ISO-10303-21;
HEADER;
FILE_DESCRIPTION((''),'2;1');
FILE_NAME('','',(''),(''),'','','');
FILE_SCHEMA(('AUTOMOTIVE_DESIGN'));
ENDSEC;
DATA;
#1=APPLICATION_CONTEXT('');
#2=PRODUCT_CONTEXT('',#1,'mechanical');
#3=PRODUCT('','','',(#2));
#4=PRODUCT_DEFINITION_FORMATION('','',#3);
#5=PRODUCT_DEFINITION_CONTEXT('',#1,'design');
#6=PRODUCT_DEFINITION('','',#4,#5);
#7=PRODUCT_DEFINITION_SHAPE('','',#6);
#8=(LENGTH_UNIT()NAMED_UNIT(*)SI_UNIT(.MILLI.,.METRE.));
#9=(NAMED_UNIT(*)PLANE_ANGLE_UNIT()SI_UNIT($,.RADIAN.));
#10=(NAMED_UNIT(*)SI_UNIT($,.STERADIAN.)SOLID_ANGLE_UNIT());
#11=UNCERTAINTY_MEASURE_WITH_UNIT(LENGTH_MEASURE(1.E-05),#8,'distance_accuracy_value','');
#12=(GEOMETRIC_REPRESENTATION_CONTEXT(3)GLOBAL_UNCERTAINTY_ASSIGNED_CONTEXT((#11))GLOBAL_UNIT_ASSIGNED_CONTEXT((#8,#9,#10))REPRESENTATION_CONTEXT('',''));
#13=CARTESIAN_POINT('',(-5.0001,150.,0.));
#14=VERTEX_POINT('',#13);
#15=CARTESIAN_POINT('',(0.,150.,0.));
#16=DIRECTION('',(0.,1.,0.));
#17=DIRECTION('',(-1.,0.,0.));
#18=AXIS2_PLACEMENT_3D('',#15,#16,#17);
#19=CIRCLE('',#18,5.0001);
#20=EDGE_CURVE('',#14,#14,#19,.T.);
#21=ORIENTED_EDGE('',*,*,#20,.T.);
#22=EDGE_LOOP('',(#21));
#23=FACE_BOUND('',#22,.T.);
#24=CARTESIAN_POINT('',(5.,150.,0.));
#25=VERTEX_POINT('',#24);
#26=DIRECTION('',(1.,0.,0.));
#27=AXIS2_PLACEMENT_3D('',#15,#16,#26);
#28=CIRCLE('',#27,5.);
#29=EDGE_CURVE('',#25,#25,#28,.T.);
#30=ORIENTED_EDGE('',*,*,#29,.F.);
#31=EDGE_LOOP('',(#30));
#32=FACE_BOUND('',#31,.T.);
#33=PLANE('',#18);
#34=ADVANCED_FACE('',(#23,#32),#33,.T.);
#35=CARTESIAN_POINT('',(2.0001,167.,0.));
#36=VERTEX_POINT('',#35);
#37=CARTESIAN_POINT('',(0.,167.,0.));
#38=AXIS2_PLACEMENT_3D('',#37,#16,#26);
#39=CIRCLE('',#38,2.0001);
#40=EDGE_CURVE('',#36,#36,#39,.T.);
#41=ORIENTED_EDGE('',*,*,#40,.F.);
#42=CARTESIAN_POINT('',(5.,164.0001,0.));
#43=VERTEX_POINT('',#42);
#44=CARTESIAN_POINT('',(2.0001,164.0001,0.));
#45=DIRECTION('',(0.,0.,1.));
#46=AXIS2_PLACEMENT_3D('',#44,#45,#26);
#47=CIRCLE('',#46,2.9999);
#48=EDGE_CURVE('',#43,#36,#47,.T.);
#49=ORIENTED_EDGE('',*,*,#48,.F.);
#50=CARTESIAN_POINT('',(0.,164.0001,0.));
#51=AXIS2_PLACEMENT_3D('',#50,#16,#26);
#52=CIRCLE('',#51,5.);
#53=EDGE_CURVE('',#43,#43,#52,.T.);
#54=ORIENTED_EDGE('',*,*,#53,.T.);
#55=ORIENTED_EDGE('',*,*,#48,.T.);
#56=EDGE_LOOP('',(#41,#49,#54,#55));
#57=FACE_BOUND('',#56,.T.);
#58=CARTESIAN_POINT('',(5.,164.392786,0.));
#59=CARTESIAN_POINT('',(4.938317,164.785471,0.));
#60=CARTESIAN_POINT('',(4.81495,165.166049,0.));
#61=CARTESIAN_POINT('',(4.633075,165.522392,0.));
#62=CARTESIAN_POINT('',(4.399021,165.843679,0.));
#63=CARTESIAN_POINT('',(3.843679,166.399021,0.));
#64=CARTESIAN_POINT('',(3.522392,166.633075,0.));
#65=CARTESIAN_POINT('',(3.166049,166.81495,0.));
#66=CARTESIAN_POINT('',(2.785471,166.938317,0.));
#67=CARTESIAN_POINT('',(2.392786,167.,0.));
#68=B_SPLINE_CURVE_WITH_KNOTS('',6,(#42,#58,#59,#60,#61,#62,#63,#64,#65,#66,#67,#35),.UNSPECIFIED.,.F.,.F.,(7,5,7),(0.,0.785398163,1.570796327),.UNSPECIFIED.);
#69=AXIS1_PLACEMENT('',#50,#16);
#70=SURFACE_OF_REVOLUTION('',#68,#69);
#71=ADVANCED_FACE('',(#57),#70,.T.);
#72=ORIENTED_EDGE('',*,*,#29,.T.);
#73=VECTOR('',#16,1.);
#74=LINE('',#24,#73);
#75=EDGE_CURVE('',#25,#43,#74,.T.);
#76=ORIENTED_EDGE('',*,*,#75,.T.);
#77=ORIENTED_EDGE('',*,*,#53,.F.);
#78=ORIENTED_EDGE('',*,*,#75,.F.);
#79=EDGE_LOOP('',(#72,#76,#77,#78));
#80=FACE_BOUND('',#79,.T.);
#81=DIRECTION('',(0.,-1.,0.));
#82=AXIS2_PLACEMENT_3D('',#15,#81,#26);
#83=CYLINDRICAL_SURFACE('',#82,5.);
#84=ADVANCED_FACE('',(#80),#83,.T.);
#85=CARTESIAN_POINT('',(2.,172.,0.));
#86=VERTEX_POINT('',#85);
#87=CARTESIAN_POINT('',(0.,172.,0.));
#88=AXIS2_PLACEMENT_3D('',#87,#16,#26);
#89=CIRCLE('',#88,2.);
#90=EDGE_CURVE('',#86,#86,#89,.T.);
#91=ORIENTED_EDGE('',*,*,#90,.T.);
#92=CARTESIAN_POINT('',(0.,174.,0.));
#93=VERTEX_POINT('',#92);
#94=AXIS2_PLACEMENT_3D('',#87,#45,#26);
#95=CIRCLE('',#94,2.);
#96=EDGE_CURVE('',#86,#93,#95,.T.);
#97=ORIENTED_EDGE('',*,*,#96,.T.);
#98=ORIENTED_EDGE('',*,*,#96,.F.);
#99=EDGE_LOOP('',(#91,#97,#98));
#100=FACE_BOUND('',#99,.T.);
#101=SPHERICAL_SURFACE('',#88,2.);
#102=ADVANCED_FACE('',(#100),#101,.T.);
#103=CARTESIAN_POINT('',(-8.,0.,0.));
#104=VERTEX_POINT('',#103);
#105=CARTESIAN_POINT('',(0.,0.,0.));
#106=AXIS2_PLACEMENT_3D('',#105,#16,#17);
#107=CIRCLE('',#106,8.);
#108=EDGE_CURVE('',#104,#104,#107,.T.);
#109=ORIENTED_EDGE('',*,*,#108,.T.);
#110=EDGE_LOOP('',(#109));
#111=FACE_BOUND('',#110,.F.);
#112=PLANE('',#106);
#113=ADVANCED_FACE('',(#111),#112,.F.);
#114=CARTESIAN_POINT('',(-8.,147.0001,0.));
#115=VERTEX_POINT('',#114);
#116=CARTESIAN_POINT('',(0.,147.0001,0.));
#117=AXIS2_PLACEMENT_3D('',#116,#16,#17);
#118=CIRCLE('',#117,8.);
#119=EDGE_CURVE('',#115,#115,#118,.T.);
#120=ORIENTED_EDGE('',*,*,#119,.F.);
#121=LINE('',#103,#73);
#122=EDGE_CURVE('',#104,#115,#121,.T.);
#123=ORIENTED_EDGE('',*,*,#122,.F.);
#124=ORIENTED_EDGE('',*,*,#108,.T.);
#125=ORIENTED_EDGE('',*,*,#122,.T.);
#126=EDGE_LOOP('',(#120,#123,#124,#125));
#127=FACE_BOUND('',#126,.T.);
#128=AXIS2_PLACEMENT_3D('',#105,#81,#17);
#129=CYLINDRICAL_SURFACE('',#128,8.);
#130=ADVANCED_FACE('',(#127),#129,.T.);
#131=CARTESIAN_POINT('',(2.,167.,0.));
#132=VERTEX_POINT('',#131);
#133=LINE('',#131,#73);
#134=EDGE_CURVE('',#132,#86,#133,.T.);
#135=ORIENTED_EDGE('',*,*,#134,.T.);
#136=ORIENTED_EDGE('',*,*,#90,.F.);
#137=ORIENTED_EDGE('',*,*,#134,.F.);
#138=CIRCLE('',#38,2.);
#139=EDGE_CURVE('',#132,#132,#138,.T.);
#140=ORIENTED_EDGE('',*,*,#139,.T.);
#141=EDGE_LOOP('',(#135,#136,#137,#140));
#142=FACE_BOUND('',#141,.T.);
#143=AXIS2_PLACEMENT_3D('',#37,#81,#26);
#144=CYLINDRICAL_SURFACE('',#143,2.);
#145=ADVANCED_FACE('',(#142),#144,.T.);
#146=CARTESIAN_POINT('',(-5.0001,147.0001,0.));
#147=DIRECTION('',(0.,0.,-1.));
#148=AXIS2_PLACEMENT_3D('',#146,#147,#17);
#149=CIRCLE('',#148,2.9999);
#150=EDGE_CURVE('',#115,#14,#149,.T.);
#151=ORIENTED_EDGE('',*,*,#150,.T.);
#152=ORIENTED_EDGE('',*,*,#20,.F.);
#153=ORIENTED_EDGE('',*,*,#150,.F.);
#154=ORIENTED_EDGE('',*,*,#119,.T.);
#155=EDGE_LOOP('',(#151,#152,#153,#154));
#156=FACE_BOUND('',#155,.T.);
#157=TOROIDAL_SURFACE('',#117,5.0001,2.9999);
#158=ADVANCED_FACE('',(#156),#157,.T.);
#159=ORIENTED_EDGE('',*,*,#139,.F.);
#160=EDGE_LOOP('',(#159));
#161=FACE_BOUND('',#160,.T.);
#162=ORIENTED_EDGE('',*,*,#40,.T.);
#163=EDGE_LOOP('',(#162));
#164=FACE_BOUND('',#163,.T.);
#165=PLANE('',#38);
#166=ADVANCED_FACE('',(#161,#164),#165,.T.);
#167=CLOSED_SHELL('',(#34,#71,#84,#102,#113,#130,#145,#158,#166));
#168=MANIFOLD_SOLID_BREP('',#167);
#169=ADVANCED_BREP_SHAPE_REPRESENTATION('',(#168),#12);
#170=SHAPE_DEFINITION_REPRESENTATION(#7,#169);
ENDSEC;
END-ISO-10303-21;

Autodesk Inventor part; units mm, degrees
ref_plane "YZ Plane" through (0, 0, 0) normal (1, 0, 0) x (0, 1, 0)
ref_plane "XZ Plane" through (0, 0, 0) normal (0, 1, 0) x (-1, 0, 0)
ref_plane "XY Plane" through (0, 0, 0) normal (0, 0, 1) x (1, 0, 0)
sketch "Sketch1" plane through (0, 0, 0) normal (0, 1, 0) x (-1, 0, 0)
  circle A0 centre (0, 0) radius 8
  dimension "d0" = 16
extrude "Extrusion1" add sketch "Sketch1" along normal blind 150
sketch "Sketch2" plane through (0, 150, 0) normal (0, 1, 0) x (1, 0, 0)
  circle A0 centre (0, 0) radius 8 projected
  circle A1 centre (0, 0) radius 5
  dimension "d3" = 10
extrude "Extrusion2" add sketch "Sketch2" along normal blind 17 contours A1
sketch "Sketch3" plane through (0, 167, 0) normal (0, 1, 0) x (1, 0, 0)
  circle A0 centre (0, 0) radius 5 projected
  circle A1 centre (0, 0) radius 2
  dimension "d6" = 4
extrude "Extrusion3" add sketch "Sketch3" along normal blind 7 contours A1
fillet "Fillet1" radius 3 1 edges at (8, 150, 0)
fillet "Fillet2" radius 3 1 edges at (-5, 167, 0)
fillet "Fillet3" radius 2 1 edges at (-2, 174, 0)
properties part number "pen_pentel_knockle"
